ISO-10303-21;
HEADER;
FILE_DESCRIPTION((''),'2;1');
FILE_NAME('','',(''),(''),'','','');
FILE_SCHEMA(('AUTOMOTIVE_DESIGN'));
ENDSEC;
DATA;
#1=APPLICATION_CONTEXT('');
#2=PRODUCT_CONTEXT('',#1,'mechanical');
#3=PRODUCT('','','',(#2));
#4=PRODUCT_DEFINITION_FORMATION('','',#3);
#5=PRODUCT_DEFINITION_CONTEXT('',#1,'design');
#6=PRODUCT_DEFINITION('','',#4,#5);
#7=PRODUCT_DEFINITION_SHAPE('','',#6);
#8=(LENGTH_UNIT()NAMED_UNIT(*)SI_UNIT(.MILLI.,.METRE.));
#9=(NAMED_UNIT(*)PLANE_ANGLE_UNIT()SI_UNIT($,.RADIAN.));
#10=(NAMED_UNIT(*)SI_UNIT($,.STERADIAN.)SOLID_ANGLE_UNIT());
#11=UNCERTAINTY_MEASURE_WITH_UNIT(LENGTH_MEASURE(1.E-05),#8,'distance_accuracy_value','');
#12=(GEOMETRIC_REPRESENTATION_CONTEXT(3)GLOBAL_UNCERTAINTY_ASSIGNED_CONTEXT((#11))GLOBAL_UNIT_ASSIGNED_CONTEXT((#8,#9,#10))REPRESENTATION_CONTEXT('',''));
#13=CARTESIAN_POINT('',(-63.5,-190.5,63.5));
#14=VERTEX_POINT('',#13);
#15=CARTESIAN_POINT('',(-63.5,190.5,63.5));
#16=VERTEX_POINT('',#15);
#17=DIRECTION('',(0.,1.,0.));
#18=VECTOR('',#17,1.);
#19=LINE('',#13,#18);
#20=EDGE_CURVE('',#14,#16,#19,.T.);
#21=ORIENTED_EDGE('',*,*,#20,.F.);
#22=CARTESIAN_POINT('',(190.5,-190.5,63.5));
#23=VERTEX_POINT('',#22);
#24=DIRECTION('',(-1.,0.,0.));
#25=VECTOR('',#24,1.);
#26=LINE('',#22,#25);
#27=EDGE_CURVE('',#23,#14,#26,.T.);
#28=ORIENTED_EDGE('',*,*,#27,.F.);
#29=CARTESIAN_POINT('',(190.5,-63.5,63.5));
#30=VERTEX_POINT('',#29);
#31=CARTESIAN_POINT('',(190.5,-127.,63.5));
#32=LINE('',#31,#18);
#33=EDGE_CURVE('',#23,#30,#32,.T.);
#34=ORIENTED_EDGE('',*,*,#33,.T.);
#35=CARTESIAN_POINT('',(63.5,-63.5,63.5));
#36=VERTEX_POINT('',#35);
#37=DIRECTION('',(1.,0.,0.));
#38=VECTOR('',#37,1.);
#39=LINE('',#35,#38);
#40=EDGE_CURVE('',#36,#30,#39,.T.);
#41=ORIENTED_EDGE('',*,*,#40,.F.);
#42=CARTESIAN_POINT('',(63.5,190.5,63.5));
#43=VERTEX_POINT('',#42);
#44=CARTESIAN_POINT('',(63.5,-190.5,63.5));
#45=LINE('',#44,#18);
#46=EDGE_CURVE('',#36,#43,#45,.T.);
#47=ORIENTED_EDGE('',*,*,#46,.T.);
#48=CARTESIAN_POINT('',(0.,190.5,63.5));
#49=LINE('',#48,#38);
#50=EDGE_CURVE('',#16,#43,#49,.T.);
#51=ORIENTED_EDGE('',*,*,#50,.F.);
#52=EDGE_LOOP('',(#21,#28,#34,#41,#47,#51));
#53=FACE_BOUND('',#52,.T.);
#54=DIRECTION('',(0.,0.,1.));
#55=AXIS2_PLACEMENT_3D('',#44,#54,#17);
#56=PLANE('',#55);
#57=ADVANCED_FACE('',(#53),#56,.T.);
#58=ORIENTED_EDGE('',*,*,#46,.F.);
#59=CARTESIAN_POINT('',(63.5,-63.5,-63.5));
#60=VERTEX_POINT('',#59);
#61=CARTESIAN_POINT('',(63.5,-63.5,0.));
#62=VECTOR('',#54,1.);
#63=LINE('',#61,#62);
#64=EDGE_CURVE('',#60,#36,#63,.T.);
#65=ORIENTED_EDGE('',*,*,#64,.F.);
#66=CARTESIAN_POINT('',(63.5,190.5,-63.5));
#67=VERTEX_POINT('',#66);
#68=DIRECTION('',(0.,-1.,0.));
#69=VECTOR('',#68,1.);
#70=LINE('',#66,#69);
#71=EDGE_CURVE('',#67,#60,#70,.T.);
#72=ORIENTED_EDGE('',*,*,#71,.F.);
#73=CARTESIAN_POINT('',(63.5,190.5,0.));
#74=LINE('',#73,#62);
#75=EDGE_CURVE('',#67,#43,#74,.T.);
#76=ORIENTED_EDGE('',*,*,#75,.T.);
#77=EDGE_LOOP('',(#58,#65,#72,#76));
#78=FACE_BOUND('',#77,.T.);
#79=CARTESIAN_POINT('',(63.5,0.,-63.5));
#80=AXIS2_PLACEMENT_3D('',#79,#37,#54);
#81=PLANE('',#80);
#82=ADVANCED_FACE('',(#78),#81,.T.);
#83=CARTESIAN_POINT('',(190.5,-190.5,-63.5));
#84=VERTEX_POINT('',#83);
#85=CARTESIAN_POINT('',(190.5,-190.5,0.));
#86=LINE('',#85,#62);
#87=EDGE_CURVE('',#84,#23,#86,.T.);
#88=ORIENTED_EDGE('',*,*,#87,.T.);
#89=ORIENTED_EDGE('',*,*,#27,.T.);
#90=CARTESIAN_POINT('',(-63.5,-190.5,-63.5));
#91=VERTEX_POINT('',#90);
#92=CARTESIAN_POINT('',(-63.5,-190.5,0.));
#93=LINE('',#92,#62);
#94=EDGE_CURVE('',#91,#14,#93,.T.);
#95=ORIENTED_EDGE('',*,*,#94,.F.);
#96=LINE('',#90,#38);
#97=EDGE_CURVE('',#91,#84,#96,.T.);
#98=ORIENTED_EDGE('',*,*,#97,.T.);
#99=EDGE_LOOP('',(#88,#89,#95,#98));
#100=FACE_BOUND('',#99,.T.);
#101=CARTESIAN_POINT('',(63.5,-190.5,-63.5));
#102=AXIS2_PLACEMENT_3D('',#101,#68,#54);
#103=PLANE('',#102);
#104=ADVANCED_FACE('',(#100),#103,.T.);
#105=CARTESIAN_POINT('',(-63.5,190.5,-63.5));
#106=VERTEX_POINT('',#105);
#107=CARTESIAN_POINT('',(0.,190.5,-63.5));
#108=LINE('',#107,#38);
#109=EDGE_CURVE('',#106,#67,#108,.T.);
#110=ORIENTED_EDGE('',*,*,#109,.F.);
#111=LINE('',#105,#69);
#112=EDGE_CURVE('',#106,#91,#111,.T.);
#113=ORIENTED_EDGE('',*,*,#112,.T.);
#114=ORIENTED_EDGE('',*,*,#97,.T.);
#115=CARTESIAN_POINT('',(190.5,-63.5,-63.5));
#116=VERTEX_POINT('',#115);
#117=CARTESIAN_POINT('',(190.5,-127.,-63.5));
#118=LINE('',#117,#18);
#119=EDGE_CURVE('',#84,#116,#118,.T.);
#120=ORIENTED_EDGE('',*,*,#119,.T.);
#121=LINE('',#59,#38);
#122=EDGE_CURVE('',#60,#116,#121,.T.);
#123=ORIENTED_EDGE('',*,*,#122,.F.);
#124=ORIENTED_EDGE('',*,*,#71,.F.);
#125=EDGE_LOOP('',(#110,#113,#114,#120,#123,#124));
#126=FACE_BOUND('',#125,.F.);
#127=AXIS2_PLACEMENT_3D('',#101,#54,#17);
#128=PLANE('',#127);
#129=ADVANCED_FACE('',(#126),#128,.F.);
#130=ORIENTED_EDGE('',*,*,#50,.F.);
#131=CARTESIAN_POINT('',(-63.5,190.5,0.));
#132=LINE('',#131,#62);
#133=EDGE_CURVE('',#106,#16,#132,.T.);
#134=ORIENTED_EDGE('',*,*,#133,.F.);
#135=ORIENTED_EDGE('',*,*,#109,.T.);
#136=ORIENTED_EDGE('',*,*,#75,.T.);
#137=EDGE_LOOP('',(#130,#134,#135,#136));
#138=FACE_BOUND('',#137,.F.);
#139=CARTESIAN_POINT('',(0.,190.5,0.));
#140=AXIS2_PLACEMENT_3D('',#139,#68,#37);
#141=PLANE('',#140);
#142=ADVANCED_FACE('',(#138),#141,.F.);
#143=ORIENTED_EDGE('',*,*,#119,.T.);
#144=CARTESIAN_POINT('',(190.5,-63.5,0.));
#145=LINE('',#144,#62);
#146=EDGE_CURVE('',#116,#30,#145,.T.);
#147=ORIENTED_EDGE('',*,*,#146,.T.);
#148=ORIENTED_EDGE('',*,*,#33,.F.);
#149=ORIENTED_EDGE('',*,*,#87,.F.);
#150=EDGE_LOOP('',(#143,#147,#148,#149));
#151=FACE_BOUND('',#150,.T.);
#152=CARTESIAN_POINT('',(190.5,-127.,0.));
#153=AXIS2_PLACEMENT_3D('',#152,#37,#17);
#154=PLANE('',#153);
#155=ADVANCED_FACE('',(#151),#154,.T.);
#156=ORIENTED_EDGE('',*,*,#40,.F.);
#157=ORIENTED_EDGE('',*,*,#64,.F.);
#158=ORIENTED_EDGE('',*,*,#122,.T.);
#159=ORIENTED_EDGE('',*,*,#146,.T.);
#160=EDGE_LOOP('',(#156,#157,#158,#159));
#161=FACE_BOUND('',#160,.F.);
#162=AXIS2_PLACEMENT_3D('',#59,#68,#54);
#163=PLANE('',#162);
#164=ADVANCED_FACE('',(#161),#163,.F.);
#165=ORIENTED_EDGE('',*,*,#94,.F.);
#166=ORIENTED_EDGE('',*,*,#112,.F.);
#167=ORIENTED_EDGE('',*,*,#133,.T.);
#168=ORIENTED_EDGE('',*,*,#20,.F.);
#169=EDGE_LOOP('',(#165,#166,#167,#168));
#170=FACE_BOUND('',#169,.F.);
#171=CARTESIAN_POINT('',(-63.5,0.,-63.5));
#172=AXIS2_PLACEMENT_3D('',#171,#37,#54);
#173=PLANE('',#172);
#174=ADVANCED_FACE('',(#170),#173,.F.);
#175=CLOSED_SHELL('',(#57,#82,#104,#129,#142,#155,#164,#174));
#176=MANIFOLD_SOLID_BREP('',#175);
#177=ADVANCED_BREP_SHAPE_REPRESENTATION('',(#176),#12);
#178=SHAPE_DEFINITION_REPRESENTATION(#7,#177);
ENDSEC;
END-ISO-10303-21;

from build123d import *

# Parameters (mm, degrees)
F1_W     = 127
F1_H     = 127
F2_DEPTH = 190.5
F3_W     = 127
F3_H     = 127
F4_DEPTH = 127


# Not quite as in the source:
# - a variable given as a bare number and used for a length is read in inches; the dataset says mm whatever the document's units were


with BuildPart() as f2:
    # F1 (on Front) → F2 (new body, symmetric)
    with BuildSketch(Plane.XZ):
        Rectangle(F1_W, F1_H)
    extrude(amount=F2_DEPTH, both=True)

    # F3 (on face) → F4 (join)
    with BuildSketch(Plane.YZ.offset(63.5)):
        with Locations((-127, 0)):
            Rectangle(F3_W, F3_H)
    extrude(amount=F4_DEPTH)


solid = f2.part
